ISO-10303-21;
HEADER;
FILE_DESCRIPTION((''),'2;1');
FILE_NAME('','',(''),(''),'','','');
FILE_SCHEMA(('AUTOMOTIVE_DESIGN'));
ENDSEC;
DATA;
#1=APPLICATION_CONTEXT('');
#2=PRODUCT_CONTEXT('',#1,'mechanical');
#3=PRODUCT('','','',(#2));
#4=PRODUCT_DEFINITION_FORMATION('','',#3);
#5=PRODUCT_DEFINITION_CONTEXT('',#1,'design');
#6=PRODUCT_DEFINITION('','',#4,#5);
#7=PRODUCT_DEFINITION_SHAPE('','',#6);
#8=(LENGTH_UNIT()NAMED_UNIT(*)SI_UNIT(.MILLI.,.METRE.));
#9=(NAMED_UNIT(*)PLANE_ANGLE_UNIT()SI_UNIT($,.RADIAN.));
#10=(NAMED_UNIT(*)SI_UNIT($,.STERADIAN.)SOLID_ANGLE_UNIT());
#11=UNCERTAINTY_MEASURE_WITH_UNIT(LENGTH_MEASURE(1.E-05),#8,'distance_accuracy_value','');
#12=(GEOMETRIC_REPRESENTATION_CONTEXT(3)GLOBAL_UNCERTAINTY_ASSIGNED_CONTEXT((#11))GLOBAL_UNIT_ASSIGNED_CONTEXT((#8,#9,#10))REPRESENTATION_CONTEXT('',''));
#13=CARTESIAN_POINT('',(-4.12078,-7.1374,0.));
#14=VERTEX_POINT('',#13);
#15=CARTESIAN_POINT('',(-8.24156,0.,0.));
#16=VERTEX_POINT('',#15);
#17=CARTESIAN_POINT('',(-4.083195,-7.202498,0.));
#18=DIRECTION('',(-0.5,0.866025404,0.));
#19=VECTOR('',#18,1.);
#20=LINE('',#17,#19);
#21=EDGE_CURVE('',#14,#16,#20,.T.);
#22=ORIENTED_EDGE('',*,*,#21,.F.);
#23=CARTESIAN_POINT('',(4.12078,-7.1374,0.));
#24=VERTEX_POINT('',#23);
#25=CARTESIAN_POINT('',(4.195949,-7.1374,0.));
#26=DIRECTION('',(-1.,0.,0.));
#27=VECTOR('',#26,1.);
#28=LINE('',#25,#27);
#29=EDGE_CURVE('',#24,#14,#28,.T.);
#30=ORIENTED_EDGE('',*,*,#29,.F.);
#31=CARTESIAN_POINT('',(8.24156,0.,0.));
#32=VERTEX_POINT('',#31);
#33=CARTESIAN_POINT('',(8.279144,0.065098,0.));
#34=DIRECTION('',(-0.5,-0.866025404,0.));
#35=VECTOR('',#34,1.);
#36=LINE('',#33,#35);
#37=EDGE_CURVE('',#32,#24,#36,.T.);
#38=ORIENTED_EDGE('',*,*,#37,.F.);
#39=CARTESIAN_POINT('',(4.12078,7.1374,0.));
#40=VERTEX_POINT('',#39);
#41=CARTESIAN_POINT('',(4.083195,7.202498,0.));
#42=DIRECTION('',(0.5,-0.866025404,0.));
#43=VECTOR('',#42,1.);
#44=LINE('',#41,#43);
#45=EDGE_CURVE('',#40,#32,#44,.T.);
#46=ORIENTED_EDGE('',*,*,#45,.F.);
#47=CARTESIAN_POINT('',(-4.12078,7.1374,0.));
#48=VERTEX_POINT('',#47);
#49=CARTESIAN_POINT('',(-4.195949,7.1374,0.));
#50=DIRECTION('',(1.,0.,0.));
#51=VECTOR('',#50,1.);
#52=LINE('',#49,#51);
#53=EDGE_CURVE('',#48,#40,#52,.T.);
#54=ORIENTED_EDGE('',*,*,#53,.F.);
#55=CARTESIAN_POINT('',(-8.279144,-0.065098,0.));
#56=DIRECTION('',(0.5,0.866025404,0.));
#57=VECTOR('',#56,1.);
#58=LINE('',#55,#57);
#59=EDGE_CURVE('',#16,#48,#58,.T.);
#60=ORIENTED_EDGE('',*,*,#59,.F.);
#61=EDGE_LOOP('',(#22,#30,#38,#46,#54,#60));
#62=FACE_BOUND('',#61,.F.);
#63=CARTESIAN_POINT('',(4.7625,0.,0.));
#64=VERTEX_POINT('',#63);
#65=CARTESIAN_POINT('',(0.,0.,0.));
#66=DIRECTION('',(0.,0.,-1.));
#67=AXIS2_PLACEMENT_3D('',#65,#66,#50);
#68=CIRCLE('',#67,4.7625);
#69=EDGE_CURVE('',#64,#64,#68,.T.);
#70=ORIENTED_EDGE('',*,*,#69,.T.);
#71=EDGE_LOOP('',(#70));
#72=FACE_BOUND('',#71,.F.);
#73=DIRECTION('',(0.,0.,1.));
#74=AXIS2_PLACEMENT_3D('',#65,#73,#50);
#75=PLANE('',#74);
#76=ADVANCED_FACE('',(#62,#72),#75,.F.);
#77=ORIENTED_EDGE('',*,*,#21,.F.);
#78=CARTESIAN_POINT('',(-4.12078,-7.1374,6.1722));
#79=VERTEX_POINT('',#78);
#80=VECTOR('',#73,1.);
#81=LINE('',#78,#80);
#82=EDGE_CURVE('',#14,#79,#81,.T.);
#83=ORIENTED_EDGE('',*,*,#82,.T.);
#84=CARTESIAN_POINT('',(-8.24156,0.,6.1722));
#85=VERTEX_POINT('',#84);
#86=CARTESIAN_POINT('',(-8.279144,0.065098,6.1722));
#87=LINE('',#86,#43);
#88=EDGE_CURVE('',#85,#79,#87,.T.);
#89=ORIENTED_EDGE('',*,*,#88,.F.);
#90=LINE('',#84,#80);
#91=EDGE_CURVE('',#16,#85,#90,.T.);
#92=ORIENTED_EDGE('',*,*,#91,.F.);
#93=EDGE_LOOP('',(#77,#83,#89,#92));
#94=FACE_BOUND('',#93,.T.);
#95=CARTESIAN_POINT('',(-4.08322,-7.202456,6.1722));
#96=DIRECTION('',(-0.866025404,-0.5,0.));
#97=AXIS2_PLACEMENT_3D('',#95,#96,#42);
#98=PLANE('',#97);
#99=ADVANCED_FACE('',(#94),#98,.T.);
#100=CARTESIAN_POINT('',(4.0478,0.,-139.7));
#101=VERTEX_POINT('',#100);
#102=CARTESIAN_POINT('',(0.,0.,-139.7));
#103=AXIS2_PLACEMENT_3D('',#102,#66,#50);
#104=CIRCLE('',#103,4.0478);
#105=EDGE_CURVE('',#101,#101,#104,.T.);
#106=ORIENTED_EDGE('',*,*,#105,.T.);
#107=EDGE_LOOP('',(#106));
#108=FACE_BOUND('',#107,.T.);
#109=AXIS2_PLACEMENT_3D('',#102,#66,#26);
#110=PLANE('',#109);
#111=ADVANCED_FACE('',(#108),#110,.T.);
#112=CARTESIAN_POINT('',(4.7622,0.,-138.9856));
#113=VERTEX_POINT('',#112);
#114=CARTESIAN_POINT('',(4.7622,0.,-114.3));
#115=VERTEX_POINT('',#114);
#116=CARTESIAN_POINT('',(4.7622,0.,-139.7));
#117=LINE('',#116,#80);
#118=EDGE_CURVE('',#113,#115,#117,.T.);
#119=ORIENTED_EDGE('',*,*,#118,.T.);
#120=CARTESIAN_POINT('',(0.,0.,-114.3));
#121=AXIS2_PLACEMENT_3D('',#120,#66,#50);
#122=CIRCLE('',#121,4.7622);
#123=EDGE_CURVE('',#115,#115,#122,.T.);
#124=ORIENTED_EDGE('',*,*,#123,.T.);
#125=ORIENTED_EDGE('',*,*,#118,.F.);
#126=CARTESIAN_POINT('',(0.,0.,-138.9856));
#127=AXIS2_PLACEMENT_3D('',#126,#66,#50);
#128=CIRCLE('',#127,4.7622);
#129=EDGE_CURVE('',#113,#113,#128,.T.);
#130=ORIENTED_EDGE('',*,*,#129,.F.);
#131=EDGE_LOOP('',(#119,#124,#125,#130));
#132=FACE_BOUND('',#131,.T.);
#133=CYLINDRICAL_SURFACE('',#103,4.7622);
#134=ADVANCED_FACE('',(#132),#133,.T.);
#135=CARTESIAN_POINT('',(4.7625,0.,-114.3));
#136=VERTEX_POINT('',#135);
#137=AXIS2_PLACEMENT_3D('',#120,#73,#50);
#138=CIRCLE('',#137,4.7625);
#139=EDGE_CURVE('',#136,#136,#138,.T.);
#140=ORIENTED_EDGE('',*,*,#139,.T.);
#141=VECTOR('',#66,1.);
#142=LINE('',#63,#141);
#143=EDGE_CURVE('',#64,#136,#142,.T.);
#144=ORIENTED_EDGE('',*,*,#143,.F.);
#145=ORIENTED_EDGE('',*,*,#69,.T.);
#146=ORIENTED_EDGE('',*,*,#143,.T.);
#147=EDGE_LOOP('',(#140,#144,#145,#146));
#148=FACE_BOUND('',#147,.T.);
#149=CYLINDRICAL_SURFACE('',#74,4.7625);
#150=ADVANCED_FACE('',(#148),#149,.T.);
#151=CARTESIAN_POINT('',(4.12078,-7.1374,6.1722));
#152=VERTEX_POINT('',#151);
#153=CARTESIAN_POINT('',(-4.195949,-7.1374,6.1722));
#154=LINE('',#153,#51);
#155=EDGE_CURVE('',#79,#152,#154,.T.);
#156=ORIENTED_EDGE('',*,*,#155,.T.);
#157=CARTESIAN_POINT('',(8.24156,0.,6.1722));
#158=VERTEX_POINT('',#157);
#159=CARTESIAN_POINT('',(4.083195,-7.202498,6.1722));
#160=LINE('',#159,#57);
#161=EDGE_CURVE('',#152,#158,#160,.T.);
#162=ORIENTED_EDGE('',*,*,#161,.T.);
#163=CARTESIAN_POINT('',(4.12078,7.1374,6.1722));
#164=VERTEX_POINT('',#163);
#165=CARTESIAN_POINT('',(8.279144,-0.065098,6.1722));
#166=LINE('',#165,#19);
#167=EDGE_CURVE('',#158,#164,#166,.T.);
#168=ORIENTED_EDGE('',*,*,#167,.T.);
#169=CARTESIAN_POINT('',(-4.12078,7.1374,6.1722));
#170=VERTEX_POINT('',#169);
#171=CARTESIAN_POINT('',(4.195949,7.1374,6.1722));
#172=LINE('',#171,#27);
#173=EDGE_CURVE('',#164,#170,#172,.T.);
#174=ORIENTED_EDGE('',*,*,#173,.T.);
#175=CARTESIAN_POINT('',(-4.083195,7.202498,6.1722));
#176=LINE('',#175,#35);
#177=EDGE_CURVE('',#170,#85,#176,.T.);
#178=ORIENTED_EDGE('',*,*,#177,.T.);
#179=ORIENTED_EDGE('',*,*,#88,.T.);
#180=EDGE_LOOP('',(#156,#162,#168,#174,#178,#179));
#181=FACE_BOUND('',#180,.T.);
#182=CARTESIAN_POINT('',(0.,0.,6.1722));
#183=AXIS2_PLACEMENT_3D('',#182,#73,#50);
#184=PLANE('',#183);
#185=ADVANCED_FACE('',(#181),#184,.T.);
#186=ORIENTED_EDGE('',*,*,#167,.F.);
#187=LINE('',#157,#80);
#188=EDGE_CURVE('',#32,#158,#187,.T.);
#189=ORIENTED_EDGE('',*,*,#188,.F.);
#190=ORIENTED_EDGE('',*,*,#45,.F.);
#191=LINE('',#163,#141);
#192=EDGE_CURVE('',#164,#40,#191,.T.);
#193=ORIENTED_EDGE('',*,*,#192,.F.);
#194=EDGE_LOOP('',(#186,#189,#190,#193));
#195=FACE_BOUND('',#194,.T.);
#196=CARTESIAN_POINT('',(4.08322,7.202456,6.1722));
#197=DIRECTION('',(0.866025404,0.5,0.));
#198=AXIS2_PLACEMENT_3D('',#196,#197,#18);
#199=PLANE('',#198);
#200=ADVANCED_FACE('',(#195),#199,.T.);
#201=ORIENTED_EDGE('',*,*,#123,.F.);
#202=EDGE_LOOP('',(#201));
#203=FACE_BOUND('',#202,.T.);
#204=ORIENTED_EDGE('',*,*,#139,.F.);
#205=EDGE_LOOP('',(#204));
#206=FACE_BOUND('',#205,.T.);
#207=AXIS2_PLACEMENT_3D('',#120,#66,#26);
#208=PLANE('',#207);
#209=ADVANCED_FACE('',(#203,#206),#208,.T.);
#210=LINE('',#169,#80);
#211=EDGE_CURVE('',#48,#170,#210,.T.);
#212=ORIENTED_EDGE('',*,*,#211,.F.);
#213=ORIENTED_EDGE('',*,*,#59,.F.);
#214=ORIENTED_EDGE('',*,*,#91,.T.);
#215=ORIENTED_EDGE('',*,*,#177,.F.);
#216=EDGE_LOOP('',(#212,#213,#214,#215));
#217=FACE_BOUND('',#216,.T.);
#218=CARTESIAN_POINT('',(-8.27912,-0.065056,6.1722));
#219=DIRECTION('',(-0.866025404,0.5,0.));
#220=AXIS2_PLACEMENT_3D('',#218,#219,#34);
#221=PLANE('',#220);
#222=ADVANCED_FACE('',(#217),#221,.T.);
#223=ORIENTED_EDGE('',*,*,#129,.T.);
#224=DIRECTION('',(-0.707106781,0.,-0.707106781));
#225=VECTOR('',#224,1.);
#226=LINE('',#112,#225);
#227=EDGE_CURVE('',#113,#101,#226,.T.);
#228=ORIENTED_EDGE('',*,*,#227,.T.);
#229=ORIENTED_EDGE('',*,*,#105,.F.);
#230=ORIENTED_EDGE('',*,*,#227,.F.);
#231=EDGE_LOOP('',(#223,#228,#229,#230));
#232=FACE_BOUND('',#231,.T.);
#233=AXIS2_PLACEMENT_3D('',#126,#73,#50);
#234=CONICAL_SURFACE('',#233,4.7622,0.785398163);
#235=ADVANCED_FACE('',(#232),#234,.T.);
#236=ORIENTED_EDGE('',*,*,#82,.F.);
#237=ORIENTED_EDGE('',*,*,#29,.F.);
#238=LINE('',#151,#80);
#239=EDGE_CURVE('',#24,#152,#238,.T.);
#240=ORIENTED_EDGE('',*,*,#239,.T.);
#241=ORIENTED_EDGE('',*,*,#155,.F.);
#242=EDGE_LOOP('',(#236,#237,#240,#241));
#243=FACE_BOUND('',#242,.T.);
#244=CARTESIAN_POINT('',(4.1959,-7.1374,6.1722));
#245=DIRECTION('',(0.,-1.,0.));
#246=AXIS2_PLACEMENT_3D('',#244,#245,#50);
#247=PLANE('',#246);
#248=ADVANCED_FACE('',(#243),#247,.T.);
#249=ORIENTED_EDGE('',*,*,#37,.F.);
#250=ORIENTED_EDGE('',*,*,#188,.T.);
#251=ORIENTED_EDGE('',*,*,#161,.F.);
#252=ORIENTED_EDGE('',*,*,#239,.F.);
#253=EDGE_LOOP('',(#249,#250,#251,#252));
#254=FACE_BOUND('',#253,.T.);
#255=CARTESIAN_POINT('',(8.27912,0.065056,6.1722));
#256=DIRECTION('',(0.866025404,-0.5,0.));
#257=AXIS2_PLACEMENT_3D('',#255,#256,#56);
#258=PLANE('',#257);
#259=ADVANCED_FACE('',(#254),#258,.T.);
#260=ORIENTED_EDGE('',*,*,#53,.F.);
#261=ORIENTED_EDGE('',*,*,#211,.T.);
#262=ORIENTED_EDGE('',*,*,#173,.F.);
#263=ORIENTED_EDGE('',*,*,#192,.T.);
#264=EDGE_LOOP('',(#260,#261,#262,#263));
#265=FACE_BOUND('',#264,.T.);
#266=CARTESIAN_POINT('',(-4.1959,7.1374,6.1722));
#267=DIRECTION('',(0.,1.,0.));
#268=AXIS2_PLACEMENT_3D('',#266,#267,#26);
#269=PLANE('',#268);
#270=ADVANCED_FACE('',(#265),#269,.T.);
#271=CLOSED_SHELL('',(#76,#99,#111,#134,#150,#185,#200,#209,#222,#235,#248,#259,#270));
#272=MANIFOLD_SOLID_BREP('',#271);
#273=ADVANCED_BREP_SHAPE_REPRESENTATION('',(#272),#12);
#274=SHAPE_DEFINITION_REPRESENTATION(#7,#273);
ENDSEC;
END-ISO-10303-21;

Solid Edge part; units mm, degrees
sketch "Sketch1" plane through (0, 0, 0) normal (0, 0, 1) x (1, 0, 0)
  circle A0 centre (0, 0) radius 8.2794
  dimension "D1" = 16.5588
extrude "Protrusion1" add sketch "Sketch1" along normal blind 6.1722
sketch "Sketch2" plane through (0, 0, 0) normal (0, 0, -1) x (1, 0, 0)
  circle A0 centre (0, 0) radius 4.7625
extrude "Protrusion2" add sketch "Sketch2" along normal blind 139.7
sketch "Sketch3" plane through (0, 0, -139.7) normal (0, 0, -1) x (1, 0, 0)
  circle A0 centre (0, 0) radius 4.7622
extrude "Cutout1" cut sketch "Sketch3" against normal blind 25.4 flip side to cut
chamfer "Chamfer_1" distance 0.7144 angle 45 1 edges at (-4.7622, 0, -139.7)
sketch "Sketch4" plane through (0, 0, 6.1722) normal (0, 0, 1) x (1, 0, 0)
  line L0 (-4.1959, 7.1374) -> (4.1959, 7.1374)
  dimension "D1" = 14.2748
extrude "Cutout2" cut sketch "Sketch4" against normal up to next material side at (0, 7.1874, 6.1722)
pattern_circular "Pattern1" count 6 over 360 about axis through (0, 0, 6.1722) along (0, 0, 1) of "Cutout2"
properties part number "24109078"
